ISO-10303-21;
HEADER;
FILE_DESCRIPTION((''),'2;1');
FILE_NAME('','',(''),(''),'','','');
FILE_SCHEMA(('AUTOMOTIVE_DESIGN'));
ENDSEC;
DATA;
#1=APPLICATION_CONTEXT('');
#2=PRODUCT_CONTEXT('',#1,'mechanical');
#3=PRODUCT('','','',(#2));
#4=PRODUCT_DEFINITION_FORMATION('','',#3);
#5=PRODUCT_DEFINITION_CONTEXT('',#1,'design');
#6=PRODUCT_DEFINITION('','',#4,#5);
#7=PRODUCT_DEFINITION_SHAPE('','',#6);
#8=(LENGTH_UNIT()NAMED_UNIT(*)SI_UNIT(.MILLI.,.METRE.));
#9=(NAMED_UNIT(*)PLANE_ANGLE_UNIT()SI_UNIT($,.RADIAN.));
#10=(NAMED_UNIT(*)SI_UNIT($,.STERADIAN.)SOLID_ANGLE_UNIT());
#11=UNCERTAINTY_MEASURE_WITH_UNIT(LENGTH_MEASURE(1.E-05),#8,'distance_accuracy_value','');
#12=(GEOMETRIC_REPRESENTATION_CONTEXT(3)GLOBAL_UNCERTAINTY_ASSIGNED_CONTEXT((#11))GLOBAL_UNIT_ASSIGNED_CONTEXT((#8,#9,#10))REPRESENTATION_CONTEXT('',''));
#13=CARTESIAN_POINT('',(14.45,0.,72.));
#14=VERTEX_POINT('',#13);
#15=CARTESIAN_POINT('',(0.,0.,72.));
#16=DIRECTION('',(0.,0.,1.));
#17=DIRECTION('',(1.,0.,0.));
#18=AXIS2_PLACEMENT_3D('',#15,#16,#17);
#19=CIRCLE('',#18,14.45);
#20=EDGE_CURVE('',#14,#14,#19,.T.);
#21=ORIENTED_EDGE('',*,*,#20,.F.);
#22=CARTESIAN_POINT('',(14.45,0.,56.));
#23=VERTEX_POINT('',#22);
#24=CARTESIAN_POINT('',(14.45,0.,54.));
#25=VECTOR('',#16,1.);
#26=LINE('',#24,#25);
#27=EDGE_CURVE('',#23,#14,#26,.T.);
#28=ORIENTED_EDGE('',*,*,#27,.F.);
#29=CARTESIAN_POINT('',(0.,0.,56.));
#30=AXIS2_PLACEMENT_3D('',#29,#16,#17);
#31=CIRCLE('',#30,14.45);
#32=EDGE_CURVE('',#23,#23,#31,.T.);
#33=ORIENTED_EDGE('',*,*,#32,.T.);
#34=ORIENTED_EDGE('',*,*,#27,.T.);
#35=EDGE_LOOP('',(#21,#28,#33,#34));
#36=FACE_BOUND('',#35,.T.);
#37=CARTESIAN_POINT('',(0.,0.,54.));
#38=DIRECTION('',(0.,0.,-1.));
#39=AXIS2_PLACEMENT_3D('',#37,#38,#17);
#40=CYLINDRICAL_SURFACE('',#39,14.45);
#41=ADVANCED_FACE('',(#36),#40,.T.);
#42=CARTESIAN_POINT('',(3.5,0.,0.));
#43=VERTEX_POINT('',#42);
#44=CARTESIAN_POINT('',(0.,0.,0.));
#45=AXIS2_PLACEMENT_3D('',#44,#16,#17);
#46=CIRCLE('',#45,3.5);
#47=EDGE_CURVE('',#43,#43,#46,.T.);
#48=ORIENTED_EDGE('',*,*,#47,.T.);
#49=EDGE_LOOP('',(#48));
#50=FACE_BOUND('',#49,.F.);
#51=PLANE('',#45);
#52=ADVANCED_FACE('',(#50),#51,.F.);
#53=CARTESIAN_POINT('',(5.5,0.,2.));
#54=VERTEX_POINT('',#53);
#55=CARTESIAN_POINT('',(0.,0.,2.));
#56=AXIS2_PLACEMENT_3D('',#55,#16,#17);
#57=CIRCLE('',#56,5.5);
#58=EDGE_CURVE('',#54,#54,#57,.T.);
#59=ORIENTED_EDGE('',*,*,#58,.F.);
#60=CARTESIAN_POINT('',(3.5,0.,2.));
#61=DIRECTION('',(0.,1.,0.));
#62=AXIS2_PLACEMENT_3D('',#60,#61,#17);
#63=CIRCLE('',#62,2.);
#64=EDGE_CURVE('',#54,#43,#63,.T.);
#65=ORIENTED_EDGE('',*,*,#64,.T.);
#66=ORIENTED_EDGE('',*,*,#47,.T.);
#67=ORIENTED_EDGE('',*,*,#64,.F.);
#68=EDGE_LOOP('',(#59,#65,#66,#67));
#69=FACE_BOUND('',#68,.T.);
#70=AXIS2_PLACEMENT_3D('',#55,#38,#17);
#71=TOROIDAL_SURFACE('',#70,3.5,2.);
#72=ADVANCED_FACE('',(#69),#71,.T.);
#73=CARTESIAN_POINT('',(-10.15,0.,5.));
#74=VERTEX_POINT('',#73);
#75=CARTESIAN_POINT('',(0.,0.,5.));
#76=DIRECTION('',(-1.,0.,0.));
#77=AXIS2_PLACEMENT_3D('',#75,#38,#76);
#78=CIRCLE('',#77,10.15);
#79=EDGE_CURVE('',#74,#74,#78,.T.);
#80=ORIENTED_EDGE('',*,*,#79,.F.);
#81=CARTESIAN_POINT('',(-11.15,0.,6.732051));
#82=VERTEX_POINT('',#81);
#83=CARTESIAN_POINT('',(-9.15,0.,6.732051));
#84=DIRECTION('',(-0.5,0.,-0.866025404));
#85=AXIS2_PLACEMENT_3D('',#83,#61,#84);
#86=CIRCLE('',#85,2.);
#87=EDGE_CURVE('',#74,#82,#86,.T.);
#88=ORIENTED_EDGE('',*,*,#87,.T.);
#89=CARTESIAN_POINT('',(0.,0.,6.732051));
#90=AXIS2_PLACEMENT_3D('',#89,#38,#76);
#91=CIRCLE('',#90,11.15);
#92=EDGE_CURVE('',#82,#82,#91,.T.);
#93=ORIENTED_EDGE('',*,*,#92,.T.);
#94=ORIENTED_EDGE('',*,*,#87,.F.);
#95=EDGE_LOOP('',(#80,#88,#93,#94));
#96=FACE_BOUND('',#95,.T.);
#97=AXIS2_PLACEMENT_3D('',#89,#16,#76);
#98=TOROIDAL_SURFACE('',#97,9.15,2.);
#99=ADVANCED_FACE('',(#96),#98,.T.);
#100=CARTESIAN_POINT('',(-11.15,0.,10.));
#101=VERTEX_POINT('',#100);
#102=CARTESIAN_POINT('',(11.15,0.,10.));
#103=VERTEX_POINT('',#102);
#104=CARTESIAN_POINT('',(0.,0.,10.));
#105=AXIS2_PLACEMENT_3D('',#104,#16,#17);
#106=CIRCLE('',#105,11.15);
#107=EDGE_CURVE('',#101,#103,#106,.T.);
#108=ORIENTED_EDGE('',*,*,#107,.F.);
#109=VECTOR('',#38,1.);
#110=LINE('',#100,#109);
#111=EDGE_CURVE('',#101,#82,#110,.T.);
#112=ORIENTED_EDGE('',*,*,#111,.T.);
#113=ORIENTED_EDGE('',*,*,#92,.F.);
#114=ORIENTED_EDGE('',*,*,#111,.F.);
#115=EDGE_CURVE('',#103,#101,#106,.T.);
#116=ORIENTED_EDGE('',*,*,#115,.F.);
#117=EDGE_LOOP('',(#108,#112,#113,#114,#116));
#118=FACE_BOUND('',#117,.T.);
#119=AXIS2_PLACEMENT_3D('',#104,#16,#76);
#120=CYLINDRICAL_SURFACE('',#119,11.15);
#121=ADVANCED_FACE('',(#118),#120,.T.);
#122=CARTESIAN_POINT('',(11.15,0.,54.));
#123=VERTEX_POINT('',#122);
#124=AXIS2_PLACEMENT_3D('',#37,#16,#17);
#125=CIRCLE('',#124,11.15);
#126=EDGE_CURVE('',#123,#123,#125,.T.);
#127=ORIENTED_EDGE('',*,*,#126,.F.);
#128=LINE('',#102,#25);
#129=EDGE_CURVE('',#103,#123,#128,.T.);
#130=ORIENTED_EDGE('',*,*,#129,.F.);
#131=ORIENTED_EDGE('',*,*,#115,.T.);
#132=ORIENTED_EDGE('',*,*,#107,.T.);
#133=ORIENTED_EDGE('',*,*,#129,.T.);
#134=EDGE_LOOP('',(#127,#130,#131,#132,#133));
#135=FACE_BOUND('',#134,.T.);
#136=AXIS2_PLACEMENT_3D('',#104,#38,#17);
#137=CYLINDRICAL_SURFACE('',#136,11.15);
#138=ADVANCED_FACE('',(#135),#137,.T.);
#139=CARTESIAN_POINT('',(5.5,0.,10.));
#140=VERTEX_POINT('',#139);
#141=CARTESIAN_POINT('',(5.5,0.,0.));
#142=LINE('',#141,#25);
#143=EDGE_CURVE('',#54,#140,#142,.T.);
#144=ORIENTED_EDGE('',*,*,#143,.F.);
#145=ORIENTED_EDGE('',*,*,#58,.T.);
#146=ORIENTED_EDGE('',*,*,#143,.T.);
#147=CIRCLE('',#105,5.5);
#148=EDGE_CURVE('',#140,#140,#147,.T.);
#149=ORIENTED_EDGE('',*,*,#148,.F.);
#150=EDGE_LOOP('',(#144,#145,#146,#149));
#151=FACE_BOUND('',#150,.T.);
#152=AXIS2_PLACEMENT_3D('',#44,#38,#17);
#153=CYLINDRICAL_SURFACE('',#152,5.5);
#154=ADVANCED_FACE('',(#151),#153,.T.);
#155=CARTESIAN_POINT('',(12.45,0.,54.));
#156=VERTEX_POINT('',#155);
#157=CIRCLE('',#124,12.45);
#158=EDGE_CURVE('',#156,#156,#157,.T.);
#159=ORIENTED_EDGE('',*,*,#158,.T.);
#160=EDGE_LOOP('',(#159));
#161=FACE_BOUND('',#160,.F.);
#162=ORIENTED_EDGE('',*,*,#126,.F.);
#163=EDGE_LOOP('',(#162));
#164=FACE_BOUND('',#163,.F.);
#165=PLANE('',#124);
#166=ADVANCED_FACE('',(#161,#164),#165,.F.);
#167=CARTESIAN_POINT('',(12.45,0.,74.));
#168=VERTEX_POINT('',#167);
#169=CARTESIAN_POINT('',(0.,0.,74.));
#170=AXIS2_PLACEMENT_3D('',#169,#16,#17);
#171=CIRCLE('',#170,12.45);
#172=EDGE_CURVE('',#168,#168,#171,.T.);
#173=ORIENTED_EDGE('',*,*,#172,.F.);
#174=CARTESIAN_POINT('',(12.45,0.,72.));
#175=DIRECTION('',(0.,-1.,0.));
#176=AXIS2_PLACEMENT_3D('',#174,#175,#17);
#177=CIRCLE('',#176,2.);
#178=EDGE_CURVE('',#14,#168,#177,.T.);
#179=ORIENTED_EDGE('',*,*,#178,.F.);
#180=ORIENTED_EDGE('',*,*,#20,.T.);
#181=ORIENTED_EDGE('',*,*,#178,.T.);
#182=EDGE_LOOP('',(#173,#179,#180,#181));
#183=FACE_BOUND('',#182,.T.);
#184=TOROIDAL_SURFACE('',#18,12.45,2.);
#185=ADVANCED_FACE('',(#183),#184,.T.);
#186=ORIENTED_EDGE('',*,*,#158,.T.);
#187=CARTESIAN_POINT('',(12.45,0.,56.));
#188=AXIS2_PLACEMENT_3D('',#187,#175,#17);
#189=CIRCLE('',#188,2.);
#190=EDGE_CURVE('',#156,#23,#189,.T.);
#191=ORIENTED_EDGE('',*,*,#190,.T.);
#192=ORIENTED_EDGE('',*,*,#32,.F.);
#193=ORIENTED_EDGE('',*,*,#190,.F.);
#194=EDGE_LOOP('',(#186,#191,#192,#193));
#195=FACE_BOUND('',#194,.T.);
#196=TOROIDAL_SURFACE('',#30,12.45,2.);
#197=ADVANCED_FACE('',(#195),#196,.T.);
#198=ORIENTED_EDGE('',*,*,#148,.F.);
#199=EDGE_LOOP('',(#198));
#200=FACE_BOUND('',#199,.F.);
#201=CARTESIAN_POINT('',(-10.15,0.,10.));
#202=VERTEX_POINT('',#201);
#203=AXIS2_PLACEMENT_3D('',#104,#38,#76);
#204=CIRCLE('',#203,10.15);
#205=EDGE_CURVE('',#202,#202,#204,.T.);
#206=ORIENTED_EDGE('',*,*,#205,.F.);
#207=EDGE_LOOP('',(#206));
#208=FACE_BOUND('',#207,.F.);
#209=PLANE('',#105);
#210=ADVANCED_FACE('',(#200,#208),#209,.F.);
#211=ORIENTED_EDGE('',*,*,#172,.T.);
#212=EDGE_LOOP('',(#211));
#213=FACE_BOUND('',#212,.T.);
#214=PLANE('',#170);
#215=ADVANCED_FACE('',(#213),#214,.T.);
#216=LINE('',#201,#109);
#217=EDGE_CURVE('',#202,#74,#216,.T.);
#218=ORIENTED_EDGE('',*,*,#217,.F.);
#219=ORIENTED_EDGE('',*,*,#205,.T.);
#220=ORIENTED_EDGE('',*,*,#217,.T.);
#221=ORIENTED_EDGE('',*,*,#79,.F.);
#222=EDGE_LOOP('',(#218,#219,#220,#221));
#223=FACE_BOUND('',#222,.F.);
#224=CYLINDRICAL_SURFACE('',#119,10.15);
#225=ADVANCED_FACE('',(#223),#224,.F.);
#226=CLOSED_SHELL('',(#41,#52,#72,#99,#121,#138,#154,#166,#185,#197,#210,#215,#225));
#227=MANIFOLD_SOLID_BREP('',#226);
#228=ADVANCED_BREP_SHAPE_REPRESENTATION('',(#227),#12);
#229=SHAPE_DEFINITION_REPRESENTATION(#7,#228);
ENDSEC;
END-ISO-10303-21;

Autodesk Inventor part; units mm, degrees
ref_plane "YZ Plane" through (0, 0, 0) normal (1, 0, 0) x (0, 1, 0)
ref_plane "XZ Plane" through (0, 0, 0) normal (0, 1, 0) x (-1, 0, 0)
ref_plane "XY Plane" through (0, 0, 0) normal (0, 0, 1) x (1, 0, 0)
sketch "Sketch1" plane through (0, 0, 0) normal (0, 0, 1) x (1, 0, 0)
  circle A0 centre (0, 0) radius 5.5
  dimension "d0" = 11
extrude "Extrusion1" add sketch "Sketch1" along normal blind 10
sketch "Sketch2" plane through (0, 0, 10) normal (0, 0, 1) x (1, 0, 0)
  circle A0 centre (0, 0) radius 11.15
  dimension "d3" = 22.3
extrude "Extrusion3" add sketch "Sketch2" along normal blind 44
sketch "Sketch3" plane through (0, 0, 10) normal (0, 0, -1) x (-1, 0, 0)
  circle A0 centre (0, 0) radius 10.15
  circle A1 centre (0, 0) radius 11.15
  dimension "d8" = 20.3
  dimension "d9" = 22.3
extrude "Extrusion4" add sketch "Sketch3" along normal blind 5
sketch "Sketch4" plane through (0, 0, 54) normal (0, 0, 1) x (1, 0, 0)
  circle A0 centre (0, 0) radius 14.45
  dimension "d12" = 28.9
extrude "Extrusion5" add sketch "Sketch4" along normal blind 20
fillet "Fillet1" radius 2 1 edges at (-14.45, 0, 74)
fillet "Fillet2" radius 2 1 edges at (-5.5, 0, 0)
fillet "Fillet3" radius 2 1 edges at (11.15, 0, 5)
fillet "Fillet4" radius 2 1 edges at (-14.45, 0, 54)
properties part number "Elbow_Parallel_Rod_V1"
